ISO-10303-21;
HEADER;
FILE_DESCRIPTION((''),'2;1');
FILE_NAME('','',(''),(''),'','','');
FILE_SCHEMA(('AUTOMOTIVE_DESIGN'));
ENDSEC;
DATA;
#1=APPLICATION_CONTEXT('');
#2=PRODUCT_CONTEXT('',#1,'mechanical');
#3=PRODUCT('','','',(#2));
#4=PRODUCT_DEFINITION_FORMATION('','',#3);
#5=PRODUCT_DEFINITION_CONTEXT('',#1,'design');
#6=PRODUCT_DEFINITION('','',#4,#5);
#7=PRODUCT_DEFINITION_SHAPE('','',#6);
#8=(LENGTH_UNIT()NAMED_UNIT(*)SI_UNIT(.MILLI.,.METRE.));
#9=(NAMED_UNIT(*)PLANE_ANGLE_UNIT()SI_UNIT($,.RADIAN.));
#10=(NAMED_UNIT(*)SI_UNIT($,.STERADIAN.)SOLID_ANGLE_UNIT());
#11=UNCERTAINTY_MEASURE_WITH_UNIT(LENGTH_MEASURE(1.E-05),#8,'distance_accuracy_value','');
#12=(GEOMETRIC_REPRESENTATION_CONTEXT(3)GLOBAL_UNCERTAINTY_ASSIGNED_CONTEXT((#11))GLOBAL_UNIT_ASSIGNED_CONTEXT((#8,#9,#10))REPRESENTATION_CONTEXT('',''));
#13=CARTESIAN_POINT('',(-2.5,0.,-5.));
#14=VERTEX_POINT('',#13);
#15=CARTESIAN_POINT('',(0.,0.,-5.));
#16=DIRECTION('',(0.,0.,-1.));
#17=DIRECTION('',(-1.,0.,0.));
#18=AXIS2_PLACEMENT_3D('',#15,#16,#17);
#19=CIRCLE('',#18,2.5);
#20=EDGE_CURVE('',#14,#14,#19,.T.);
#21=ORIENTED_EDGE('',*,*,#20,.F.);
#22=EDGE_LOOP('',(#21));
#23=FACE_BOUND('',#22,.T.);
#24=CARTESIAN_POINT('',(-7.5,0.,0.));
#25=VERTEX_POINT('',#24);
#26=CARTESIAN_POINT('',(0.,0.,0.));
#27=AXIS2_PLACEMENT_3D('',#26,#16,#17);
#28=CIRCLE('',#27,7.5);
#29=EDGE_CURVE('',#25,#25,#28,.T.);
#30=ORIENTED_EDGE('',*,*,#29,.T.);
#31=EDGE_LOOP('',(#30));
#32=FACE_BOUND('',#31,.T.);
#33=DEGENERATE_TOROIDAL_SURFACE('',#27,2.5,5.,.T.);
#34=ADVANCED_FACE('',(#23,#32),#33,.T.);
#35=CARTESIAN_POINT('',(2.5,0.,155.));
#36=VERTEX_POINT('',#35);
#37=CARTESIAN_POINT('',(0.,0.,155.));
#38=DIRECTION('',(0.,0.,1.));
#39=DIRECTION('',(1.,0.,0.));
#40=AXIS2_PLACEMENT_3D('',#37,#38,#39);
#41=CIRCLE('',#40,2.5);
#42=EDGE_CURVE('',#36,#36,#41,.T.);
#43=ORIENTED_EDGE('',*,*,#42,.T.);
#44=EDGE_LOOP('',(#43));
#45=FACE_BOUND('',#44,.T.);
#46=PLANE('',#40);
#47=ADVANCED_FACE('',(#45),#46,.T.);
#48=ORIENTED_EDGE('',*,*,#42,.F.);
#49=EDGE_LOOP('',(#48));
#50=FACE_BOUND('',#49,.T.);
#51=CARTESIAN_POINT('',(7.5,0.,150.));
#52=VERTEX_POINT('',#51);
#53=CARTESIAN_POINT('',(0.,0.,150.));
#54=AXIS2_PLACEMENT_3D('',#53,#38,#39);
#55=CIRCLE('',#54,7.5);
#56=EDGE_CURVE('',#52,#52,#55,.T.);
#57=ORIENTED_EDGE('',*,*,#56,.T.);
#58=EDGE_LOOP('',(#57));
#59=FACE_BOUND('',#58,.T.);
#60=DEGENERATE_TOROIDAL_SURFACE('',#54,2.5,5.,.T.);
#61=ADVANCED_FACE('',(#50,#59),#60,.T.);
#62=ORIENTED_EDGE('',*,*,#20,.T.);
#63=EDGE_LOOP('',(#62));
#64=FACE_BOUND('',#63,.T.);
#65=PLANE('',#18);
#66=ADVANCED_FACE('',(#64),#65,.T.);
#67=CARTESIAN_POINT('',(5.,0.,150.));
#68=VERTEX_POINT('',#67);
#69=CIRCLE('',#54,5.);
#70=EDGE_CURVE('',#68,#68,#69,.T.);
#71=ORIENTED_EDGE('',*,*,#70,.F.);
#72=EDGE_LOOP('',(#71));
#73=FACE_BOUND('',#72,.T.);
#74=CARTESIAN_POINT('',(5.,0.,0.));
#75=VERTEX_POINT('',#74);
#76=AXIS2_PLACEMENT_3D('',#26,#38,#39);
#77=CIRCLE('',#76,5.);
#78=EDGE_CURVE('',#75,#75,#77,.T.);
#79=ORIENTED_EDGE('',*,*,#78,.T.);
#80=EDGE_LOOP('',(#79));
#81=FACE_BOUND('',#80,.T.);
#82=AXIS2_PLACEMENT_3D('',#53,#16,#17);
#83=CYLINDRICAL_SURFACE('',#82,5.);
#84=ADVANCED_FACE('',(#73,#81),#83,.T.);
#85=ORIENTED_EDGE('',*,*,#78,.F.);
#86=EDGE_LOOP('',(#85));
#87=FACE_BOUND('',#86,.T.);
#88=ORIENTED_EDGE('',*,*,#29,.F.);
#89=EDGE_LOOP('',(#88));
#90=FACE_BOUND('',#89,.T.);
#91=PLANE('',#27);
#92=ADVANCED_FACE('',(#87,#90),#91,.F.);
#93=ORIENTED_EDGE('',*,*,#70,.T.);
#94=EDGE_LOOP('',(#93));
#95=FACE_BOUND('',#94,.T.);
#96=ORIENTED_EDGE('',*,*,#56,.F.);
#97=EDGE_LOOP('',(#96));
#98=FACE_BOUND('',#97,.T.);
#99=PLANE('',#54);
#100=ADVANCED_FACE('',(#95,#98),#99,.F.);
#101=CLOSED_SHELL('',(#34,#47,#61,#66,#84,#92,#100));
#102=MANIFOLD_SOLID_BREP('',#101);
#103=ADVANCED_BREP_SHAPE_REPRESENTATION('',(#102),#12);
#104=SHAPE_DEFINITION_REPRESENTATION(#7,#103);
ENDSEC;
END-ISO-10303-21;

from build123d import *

# Parameters (mm, degrees)
IZIM1_R                     = 5
Y_KSEKLIK_EKSTR_ZYON1_DEPTH = 150
IZIM2_R                     = 7.5
Y_KSEKLIK_EKSTR_ZYON2_DEPTH = 5
RADYUS5_R                   = 5
Y_KSEKLIK_EKSTR_ZYON3_START = 5
IZIM3_R                     = 7.5
Y_KSEKLIK_EKSTR_ZYON3_DEPTH = 5
RADYUS6_R                   = 5


with BuildPart() as part:
    # Çizim1 → Yükseklik-Ekstrüzyon1 (new body)
    with BuildSketch(Plane.XY):
        Circle(IZIM1_R)
    extrude(amount=Y_KSEKLIK_EKSTR_ZYON1_DEPTH)

    # Çizim2 → Yükseklik-Ekstrüzyon2 (add)
    with BuildSketch(Plane.XY.offset(150)):
        Circle(IZIM2_R)
    extrude(amount=Y_KSEKLIK_EKSTR_ZYON2_DEPTH)

    # Radyus5
    radyus5_edges = [part.edges().sort_by_distance(p)[0] for p in [
        (-7.5, 0, 155),
    ]]
    fillet(radyus5_edges, radius=RADYUS5_R - 0.0001)  # a hair under: the kernel refuses the full size

    # Çizim3 → Yükseklik-Ekstrüzyon3 (add)
    with BuildSketch(Plane(origin=(0, 0, 0), x_dir=(-1, 0, 0), z_dir=(0, 0, -1)).offset(Y_KSEKLIK_EKSTR_ZYON3_START)):
        Circle(IZIM3_R)
    extrude(amount=-Y_KSEKLIK_EKSTR_ZYON3_DEPTH)

    # Radyus6
    radyus6_edges = [part.edges().sort_by_distance(p)[0] for p in [
        (7.5, 0, -5),
    ]]
    fillet(radyus6_edges, radius=RADYUS6_R - 0.0001)  # a hair under: the kernel refuses the full size


solid = part.part
